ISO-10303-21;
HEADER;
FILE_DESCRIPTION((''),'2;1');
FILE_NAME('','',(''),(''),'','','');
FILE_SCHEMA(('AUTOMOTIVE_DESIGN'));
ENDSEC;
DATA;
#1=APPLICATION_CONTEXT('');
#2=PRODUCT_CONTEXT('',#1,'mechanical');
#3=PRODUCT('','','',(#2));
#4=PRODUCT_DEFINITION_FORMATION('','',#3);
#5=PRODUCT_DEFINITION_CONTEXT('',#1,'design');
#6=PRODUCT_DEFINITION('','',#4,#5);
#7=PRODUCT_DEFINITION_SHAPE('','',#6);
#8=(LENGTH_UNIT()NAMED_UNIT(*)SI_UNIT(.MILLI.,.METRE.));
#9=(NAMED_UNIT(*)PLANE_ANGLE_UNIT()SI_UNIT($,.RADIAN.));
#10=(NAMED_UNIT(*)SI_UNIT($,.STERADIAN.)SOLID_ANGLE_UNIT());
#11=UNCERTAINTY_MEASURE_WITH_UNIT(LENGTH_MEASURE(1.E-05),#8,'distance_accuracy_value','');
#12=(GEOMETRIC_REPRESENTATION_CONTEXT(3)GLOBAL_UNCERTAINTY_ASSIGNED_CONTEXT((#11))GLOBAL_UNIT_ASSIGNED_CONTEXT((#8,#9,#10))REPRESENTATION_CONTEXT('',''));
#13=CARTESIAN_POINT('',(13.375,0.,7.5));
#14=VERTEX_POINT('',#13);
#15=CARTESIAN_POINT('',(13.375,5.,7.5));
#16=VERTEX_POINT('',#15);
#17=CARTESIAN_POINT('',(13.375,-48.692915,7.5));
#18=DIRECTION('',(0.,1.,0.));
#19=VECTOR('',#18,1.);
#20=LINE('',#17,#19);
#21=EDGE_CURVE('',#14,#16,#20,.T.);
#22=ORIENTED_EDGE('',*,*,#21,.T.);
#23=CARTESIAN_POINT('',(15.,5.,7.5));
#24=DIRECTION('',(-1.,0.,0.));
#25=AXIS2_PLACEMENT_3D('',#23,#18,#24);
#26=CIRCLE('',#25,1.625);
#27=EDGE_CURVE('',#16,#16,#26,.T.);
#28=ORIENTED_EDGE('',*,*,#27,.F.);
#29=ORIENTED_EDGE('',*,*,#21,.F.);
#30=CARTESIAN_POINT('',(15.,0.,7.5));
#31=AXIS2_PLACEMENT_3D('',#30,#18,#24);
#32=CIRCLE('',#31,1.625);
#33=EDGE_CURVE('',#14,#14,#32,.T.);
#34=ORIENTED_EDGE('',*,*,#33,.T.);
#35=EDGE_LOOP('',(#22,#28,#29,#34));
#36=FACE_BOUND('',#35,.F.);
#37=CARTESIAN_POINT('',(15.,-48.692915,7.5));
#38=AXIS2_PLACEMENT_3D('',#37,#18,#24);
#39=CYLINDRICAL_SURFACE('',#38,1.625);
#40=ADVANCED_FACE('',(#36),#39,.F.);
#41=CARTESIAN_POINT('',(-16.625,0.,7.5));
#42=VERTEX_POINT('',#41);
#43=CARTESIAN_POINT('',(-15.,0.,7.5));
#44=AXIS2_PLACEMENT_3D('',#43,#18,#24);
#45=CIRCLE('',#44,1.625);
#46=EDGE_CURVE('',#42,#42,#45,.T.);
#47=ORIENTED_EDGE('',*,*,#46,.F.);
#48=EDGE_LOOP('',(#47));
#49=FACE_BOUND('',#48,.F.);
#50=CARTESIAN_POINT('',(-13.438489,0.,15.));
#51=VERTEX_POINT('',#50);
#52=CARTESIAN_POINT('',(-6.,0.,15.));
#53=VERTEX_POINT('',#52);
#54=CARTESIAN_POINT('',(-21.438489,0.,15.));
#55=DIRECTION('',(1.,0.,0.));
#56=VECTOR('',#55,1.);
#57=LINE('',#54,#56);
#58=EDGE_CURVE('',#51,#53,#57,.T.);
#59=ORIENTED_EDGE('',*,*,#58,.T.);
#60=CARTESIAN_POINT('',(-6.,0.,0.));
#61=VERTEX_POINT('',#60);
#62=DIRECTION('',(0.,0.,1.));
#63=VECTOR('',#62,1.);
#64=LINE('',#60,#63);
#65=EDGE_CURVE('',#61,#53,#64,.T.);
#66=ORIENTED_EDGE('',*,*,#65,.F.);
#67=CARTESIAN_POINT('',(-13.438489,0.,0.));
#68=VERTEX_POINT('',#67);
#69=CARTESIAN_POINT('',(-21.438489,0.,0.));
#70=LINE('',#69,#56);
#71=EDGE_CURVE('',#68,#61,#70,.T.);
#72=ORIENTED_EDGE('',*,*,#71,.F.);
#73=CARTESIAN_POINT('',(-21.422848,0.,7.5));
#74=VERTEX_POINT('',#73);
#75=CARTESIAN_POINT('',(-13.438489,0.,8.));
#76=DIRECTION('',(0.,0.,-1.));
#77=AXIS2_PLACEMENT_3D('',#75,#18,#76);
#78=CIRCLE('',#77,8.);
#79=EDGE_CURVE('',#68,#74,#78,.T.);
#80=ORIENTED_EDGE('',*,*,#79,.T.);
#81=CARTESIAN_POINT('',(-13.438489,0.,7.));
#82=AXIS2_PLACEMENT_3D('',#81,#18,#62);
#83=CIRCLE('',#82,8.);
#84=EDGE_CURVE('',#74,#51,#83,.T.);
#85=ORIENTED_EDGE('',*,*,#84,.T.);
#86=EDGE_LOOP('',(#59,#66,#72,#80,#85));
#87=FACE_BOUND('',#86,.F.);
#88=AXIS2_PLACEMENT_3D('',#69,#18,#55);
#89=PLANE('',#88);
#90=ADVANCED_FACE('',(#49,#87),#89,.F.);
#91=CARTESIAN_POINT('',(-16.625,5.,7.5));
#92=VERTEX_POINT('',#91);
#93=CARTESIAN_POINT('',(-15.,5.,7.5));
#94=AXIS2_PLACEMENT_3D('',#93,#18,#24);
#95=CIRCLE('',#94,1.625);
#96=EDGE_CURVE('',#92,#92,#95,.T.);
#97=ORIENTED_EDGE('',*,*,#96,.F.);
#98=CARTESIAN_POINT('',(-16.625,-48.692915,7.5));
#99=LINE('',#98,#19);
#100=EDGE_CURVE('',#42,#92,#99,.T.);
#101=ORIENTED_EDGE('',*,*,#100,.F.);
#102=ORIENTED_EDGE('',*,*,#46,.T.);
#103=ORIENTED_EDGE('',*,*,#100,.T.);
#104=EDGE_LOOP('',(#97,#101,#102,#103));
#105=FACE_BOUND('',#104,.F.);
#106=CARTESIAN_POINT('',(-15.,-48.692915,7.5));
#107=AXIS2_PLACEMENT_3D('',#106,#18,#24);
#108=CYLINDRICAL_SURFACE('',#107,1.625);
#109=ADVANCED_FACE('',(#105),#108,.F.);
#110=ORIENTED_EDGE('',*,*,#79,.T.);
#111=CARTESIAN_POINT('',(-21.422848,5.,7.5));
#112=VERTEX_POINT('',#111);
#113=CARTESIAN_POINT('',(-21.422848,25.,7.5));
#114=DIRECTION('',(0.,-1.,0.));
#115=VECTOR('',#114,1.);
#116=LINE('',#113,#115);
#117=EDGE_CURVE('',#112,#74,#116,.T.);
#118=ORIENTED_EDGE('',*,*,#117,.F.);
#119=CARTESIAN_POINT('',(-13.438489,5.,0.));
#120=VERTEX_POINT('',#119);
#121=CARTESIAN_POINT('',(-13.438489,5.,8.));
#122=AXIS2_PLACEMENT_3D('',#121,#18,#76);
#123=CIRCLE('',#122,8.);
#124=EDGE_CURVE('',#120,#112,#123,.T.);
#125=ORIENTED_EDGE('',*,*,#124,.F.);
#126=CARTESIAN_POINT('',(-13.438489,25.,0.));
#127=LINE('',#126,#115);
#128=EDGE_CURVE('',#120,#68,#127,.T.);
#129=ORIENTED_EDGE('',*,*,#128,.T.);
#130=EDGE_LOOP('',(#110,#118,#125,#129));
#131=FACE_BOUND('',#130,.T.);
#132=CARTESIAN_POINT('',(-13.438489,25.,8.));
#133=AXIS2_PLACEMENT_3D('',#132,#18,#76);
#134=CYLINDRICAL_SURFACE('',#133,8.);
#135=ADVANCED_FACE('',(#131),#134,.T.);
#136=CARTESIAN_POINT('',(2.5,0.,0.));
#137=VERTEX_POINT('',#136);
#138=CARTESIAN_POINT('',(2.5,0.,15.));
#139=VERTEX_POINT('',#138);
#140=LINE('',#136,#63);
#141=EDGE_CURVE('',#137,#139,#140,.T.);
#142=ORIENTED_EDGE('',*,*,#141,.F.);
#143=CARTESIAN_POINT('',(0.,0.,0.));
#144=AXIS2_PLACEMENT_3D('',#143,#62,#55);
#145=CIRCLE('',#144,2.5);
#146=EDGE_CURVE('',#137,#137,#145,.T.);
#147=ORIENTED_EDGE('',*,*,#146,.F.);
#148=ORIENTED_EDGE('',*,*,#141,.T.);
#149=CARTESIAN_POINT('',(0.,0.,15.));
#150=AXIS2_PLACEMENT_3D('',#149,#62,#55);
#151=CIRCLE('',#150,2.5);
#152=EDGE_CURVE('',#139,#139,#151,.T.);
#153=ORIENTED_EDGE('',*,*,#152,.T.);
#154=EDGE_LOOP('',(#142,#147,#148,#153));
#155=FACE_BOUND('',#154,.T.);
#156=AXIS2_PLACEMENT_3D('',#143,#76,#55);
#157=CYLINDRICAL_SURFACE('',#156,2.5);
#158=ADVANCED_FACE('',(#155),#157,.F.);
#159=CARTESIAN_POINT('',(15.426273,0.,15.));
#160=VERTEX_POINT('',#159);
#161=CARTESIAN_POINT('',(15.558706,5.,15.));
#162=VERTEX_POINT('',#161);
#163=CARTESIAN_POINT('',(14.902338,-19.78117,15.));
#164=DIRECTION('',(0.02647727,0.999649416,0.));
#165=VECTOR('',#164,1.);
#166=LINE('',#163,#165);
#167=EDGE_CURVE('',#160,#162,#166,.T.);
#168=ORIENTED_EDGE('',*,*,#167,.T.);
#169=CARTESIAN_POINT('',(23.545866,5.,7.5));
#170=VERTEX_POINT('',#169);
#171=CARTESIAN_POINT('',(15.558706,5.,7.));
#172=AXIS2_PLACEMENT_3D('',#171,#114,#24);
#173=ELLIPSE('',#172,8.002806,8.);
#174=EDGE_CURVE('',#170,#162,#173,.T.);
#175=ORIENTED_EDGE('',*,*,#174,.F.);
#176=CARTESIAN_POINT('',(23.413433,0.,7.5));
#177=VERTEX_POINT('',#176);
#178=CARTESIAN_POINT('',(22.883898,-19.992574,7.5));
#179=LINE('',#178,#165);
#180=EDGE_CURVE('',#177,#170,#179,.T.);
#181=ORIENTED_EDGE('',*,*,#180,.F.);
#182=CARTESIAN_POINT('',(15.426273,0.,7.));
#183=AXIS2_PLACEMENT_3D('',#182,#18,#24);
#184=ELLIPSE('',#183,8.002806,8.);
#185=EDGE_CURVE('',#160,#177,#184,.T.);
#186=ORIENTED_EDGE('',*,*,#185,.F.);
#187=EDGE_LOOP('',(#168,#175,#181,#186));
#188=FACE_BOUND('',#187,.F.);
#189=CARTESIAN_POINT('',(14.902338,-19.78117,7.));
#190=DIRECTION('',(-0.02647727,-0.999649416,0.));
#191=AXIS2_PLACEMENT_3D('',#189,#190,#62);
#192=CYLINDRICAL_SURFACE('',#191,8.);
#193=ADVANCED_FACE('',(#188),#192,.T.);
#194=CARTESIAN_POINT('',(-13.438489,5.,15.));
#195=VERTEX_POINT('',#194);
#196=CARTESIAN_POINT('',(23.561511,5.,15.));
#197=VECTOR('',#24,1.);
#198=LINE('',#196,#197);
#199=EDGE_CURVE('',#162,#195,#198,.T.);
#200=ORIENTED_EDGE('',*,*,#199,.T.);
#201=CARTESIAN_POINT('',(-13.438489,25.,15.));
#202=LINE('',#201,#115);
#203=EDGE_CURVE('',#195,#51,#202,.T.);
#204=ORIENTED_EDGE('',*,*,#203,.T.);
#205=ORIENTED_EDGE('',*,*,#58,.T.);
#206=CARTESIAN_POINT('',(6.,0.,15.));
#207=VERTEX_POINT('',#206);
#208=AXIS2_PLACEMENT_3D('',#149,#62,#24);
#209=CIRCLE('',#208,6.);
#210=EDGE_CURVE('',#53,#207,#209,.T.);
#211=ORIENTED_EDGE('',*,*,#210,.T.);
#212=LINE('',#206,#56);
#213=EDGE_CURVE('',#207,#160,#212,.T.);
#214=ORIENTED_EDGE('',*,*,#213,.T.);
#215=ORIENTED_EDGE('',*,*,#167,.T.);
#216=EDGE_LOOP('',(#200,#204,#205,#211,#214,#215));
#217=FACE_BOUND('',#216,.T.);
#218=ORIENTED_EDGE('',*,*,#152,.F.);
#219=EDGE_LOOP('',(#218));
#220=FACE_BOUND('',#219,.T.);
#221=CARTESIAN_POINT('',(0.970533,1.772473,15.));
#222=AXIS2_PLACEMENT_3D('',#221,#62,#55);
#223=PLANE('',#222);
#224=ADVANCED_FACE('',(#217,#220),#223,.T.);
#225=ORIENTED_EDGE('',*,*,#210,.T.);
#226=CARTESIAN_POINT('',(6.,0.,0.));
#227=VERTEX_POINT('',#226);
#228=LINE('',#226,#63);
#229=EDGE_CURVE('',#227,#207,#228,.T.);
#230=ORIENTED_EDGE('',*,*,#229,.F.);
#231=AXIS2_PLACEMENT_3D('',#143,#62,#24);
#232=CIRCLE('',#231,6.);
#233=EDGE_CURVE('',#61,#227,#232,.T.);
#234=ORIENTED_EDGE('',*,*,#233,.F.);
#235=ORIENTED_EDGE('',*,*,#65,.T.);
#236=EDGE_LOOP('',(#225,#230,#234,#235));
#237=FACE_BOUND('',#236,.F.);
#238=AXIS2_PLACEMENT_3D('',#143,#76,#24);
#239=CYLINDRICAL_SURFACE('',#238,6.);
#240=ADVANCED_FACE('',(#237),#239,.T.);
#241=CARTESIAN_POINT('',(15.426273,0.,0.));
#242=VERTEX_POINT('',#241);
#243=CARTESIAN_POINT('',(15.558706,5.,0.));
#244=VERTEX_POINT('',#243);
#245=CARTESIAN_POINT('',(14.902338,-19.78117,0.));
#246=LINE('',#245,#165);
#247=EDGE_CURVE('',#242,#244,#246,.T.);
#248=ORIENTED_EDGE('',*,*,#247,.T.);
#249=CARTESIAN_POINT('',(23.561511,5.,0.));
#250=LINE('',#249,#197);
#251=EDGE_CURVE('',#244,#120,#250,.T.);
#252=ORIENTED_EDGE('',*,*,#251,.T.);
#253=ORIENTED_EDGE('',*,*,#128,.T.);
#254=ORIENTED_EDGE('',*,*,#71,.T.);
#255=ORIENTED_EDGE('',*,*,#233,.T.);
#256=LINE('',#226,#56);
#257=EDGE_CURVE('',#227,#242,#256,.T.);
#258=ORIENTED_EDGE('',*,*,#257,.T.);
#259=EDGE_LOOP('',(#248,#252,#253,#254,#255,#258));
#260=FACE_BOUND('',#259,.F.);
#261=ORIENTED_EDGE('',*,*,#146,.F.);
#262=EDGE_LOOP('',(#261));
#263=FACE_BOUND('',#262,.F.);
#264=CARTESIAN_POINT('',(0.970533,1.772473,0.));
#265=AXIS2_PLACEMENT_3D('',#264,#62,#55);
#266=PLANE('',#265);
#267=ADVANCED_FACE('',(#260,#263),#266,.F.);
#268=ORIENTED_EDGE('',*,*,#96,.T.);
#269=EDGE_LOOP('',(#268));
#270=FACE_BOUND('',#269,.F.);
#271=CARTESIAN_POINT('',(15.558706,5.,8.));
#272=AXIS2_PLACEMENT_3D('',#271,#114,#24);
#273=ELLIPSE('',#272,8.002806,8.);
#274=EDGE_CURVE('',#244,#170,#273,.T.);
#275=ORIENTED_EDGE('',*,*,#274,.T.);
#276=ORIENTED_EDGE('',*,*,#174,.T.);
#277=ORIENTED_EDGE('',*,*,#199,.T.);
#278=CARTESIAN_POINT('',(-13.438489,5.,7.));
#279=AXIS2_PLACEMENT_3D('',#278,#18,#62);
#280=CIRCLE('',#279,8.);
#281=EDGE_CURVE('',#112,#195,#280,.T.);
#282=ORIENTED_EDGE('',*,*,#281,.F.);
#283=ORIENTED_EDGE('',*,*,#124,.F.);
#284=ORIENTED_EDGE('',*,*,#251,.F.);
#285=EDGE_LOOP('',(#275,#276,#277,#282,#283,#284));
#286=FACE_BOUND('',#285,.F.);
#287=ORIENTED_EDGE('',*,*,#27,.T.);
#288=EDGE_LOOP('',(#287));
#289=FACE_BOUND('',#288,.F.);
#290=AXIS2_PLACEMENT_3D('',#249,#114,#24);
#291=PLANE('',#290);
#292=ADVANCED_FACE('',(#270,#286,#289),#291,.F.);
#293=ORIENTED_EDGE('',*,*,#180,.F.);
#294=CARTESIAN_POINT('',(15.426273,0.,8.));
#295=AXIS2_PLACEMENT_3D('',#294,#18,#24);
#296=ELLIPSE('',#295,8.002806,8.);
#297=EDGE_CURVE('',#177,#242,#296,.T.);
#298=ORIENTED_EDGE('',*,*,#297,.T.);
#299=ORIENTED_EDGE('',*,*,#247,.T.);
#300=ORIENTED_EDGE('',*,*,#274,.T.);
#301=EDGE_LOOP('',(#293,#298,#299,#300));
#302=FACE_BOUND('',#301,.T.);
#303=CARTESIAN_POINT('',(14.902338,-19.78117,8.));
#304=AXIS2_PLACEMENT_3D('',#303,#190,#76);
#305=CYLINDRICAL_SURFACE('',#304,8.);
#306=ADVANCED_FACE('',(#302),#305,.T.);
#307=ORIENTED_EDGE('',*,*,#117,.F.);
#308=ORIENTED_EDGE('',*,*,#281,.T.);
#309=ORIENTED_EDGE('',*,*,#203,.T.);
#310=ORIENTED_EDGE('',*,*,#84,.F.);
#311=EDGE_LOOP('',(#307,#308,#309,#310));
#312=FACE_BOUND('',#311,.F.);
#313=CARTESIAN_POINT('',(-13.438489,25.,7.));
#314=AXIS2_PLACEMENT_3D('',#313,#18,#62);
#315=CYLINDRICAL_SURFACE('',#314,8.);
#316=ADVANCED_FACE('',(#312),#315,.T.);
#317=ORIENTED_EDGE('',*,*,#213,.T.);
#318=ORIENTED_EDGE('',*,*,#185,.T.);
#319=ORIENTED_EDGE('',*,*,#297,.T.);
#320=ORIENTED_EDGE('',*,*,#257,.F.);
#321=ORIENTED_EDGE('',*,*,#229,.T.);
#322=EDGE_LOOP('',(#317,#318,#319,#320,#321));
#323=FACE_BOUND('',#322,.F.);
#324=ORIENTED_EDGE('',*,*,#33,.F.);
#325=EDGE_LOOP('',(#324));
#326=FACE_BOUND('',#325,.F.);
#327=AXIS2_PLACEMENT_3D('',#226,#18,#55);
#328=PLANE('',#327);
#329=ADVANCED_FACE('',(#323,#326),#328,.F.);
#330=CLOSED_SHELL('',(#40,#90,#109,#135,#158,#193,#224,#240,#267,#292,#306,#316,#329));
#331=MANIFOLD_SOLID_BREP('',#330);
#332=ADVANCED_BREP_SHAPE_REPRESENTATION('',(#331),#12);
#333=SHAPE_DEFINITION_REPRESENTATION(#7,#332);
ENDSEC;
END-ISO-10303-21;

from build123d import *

# Parameters (mm, degrees)
F0_R        = 2.5
F1_DEPTH    = 15
F3_D        = 3.25
F4_T1_DEPTH = 45
F4_T3_DEPTH = 45.0017535366


# Not quite as in the source:
# - a fillet or chamfer that OpenCascade refuses, or shapes differently, is made with other operations: its cross-section is extruded or revolved along the edge and cut away or added


with BuildPart() as f1:
    # F0 (on Top) → F1 (new body)
    with BuildSketch(Plane.XY):
        with BuildLine():
            Line((6, 0), (23.4290786547, 0))
            Line((23.4290786547, 0), (23.5615114343, 5))
            Line((23.5615114343, 5), (-21.4384885657, 5))
            Line((-21.4384885657, 5), (-21.4384885657, 0))
            Line((-21.4384885657, 0), (-6, 0))
            ThreePointArc((-6, 0), (0, -6), (6, 0))
        make_face()
        Circle(F0_R, mode=Mode.SUBTRACT)
    extrude(amount=F1_DEPTH)

    # F3 (through all)
    with Locations(Plane.XZ):
        with Locations((-15, 7.5), (15, 7.5)):
            Hole(F3_D / 2)

    # F4: fillet of radius 8 on 4 edges, made by hand

    # F4_s2 → F4_t1 (cut)
    with BuildSketch(Plane.XZ.offset(-25)):
        with BuildLine():
            ThreePointArc((-13.4384885657, 15), (-19.0953428152, 12.6568542495), (-21.4384885657, 7))
            Line((-21.4384885657, 7), (-21.4384885657, 15))
            Line((-21.4384885657, 15), (-13.4384885657, 15))
        make_face()
        with BuildLine():
            ThreePointArc((-13.4384885657, 0), (-19.0953428152, 2.3431457505), (-21.4384885657, 8))
            Line((-21.4384885657, 8), (-21.4384885657, 0))
            Line((-21.4384885657, 0), (-13.4384885657, 0))
        make_face()
    extrude(amount=F4_T1_DEPTH, mode=Mode.SUBTRACT)

    # F4_s4 → F4_t3 (cut)
    with BuildSketch(Plane(origin=(-0.5131205452, -19.3728677482, 0), x_dir=(0, 0, 1), z_dir=(0.0264772702, 0.9996494156, 0))):
        with BuildLine():
            ThreePointArc((15, 15.4208647858), (12.6568542495, 21.0777190353), (7, 23.4208647858))
            Line((7, 23.4208647858), (15, 23.4208647858))
            Line((15, 23.4208647858), (15, 15.4208647858))
        make_face()
        with BuildLine():
            ThreePointArc((0, 15.4208647858), (2.3431457505, 21.0777190353), (8, 23.4208647858))
            Line((8, 23.4208647858), (0, 23.4208647858))
            Line((0, 23.4208647858), (0, 15.4208647858))
        make_face()
    extrude(amount=F4_T3_DEPTH, mode=Mode.SUBTRACT)


solid = f1.part
